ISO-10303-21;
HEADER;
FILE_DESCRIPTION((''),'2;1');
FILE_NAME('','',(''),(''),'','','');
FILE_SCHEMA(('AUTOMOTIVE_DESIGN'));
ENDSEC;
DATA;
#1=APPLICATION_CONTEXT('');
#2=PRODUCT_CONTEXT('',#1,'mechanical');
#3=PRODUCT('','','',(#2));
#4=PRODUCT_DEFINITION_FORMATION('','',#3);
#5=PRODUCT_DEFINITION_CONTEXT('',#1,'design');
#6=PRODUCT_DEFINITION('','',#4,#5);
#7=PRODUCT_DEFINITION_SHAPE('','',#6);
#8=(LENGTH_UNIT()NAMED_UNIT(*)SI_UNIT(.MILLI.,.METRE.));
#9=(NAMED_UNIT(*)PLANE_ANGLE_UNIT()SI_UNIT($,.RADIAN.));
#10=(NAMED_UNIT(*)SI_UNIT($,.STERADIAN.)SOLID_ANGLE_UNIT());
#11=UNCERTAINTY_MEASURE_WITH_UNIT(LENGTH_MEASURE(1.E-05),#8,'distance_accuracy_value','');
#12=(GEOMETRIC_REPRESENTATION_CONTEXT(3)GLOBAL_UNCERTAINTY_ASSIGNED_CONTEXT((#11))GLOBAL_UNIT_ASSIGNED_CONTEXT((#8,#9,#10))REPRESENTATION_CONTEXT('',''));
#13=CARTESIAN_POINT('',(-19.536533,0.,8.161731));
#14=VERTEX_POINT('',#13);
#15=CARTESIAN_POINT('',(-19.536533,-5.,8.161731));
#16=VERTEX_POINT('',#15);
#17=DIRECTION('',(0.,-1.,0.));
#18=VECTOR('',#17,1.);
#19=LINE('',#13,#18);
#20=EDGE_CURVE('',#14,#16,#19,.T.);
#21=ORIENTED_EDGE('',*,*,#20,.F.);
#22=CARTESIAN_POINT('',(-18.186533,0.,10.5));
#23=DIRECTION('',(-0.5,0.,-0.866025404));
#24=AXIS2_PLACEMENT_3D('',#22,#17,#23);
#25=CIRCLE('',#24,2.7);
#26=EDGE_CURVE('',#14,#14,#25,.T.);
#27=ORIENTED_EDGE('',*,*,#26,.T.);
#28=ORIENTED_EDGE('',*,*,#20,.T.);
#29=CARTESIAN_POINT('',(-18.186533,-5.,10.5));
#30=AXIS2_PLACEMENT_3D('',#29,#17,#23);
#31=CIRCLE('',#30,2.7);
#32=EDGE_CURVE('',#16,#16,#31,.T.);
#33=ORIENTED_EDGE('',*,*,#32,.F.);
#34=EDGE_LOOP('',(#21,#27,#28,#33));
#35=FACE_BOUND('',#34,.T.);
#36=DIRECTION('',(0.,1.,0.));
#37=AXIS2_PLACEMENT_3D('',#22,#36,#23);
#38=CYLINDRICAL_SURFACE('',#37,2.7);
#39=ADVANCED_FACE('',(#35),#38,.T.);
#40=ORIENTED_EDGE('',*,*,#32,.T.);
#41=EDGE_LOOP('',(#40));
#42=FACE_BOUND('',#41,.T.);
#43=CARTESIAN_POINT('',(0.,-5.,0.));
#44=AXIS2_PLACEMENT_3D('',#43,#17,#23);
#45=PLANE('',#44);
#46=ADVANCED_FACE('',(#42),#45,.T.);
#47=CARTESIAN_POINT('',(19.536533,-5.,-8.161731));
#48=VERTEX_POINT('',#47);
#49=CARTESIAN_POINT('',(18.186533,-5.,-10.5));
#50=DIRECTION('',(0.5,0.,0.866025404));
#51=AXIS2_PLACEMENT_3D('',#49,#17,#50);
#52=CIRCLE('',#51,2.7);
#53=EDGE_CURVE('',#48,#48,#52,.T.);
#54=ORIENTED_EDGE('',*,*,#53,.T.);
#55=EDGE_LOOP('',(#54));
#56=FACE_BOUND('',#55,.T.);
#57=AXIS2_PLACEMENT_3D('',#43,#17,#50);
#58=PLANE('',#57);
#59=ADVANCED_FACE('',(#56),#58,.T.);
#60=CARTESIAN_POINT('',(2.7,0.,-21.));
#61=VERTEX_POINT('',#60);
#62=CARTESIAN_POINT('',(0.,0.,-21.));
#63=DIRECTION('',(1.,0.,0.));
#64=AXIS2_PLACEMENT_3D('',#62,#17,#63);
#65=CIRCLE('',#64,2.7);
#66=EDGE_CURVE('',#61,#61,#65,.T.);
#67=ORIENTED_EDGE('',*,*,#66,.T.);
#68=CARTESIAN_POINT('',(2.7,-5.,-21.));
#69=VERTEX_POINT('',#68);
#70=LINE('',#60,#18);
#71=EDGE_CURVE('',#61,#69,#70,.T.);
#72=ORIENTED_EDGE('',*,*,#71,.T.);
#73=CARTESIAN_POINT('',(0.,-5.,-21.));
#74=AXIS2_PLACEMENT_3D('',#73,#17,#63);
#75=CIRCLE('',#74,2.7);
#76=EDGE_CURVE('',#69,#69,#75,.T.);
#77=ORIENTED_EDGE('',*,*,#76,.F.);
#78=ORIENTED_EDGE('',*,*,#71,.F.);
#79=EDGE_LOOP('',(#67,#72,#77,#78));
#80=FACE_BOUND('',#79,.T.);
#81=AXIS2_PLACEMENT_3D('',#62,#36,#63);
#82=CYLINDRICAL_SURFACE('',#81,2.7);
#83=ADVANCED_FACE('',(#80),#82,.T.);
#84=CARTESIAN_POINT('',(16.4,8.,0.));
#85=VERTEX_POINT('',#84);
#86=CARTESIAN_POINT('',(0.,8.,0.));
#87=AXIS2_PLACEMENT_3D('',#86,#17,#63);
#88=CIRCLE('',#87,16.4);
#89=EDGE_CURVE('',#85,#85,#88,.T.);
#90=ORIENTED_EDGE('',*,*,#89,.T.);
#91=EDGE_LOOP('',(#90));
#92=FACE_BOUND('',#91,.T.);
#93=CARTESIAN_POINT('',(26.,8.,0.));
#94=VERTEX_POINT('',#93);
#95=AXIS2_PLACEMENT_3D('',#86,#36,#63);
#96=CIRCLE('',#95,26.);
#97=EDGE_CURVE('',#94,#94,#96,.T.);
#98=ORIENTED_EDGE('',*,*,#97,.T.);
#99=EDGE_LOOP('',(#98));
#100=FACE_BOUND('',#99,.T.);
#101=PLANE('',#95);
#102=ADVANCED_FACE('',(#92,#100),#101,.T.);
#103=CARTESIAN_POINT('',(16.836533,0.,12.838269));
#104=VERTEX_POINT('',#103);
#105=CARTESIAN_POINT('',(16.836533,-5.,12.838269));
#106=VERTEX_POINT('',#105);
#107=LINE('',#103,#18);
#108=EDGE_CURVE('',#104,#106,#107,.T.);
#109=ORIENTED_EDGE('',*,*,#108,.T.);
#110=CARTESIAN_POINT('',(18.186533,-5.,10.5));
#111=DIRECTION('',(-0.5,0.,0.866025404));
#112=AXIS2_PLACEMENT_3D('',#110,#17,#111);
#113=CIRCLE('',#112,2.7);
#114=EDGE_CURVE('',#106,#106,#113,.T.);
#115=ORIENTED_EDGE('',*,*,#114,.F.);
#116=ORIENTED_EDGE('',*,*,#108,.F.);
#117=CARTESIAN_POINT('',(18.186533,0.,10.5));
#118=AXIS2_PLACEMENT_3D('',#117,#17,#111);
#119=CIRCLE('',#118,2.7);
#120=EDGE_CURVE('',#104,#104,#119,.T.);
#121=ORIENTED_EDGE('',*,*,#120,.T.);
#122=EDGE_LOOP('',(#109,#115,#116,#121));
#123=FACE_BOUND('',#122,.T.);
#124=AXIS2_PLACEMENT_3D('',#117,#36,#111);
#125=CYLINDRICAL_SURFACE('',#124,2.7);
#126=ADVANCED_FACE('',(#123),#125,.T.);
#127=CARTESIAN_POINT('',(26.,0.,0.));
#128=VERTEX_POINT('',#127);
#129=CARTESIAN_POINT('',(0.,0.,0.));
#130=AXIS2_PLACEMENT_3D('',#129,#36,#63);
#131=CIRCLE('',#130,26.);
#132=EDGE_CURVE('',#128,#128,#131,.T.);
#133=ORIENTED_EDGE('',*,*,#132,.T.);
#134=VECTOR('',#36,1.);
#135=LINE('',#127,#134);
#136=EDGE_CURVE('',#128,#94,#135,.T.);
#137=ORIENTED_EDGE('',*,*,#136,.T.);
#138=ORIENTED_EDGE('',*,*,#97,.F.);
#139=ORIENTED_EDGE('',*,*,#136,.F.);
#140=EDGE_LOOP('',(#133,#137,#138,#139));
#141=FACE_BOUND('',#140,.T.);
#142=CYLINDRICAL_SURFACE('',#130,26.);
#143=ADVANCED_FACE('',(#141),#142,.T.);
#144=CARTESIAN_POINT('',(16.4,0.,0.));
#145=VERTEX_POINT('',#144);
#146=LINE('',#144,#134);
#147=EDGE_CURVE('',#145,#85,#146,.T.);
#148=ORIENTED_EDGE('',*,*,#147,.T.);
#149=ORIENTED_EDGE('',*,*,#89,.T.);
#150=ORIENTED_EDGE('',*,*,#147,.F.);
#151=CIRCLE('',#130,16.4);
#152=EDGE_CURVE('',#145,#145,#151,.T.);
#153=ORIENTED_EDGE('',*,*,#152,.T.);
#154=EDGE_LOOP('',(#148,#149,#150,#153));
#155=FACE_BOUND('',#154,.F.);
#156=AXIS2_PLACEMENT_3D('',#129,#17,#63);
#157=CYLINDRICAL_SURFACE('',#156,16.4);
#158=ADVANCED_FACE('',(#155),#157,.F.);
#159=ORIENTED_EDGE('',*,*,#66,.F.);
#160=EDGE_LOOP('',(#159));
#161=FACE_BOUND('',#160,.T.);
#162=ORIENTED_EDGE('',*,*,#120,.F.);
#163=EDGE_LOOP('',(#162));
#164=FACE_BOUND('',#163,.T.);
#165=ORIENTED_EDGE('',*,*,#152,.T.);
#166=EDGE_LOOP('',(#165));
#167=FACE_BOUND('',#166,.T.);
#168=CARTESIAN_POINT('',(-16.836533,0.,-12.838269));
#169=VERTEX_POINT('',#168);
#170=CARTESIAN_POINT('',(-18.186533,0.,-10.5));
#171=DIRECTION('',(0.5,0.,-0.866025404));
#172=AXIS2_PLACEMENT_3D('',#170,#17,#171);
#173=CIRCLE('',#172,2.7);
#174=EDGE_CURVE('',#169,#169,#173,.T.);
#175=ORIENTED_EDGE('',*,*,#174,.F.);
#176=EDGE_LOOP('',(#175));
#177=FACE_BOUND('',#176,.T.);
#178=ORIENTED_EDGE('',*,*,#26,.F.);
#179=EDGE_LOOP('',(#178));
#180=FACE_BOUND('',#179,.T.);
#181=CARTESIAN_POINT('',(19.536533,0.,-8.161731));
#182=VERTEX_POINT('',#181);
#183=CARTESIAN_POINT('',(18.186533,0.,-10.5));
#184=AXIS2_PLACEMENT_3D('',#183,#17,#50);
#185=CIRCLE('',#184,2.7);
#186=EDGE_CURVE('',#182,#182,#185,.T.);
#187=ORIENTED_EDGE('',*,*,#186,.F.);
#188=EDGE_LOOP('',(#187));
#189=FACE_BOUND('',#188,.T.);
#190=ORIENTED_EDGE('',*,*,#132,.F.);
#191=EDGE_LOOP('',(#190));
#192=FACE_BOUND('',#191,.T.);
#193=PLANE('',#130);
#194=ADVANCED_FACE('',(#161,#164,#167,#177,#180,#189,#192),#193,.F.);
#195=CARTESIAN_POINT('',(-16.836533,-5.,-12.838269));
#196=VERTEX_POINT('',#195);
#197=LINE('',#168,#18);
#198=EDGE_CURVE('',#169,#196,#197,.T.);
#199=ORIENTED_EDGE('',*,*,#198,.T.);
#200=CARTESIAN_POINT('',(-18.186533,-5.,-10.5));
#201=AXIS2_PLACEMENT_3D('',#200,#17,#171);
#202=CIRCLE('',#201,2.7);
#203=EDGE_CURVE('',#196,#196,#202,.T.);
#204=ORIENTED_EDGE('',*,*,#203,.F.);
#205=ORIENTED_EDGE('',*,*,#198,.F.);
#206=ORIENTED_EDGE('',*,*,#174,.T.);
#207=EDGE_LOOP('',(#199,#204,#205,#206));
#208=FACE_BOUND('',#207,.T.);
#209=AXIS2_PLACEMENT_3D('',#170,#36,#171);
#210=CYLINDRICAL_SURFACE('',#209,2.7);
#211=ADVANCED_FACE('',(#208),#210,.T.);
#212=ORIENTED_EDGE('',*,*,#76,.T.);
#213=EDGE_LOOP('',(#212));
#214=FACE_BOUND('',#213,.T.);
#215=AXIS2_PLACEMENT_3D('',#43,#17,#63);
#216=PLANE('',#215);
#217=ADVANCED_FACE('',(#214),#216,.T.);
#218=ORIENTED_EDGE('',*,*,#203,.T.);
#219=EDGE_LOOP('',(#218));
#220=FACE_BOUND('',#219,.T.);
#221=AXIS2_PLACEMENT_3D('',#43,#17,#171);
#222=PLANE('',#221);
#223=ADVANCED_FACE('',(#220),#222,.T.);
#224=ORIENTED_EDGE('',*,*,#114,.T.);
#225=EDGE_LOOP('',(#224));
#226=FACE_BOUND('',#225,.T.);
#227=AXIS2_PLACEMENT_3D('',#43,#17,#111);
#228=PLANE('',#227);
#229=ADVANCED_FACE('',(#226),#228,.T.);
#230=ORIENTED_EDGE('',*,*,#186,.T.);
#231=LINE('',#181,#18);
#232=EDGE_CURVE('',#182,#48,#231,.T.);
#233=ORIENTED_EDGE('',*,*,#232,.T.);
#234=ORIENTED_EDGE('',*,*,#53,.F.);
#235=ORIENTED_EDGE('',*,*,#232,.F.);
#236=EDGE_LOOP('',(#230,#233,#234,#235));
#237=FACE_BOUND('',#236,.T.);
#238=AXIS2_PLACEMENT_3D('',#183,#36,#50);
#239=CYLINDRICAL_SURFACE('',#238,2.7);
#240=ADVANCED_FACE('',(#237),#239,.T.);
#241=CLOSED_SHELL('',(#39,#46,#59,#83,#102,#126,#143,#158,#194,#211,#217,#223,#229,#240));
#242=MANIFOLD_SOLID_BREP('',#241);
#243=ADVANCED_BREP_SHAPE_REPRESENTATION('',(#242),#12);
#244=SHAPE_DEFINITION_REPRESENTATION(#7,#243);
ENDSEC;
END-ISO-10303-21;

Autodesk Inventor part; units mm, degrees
ref_plane "YZ Plane" through (0, 0, 0) normal (1, 0, 0) x (0, 1, 0)
ref_plane "XZ Plane" through (0, 0, 0) normal (0, 1, 0) x (-1, 0, 0)
ref_plane "XY Plane" through (0, 0, 0) normal (0, 0, 1) x (1, 0, 0)
sketch "Sketch1" plane through (0, 0, 0) normal (0, 1, 0) x (-1, 0, 0)
  line L0 (26, 0) -> (-26, 0)
  line L1 (-26, 0) -> (-26, -26)
  line L2 (-26, -26) -> (26, -26)
  line L3 (26, -26) -> (26, 0)
  point P0 (0, 0)
  dimension "d0" = 52
  dimension "d1" = 26
  dimension "d2" = 26
  dimension "d3" = 26
extrude "Extrusion1" add sketch "Sketch1" along normal blind 35
sketch "Sketch3" plane through (-26, 0, 0) normal (0, 0, 1) x (1, 0, 0)
  line L0 (0, 35) -> (52, 35) projected
  line L1 (38.8, 35) -> (65.2826, 35)
  line L2 (65.2826, 35) -> (65.2826, 0)
  line L3 (26, -13.8937) -> (26, 45.4279) projected
  line L4 (52, 0) -> (52, 35) projected
  arc A0 (52, 10.4979) -> (38.8, 35) centre (22.6594, 10.4979) ccw
  line L5 (52, 10.4979) -> (52, 0)
  line L6 (65.2826, 0) -> (52, 0)
  point P0 (26, 0)
  point P1 (52, 10.9288)
  dimension "d7" = 90
  dimension "d33" = 12.8
revolve "Revolution1" cut sketch "Sketch3" angle 360 about axis through (0, 35, 0) along (0, 1, 0)
sketch "Sketch2" plane through (0, 35, 0) normal (0, 1, 0) x (1, 0, 0)
  circle A0 centre (0, 0) radius 12.8
  dimension "d6" = 25.6
extrude "Extrusion2" cut sketch "Sketch2" against normal blind 1
sketch "Sketch4" plane through (0, 34, 0) normal (0, 1, 0) x (1, 0, 0)
  circle A0 centre (0, 0) radius 11.4
  dimension "d11" = 22.8
extrude "Extrusion3" cut sketch "Sketch4" against normal through all
sketch "Sketch5" plane through (0, 0, 0) normal (0, -1, 0) x (1, 0, 0)
  circle A0 centre (0, 0) radius 16.4
  dimension "d16" = 32.8
extrude "Extrusion4" cut sketch "Sketch5" against normal blind 26
sketch "Sketch8" plane through (0, 0, 0) normal (0, -1, 0) x (1, 0, 0)
  circle A0 centre (0, -21) radius 2.7
  point P0 (0, 0)
  dimension "d21" = 5.4
  dimension "d22" = 21
extrude "Extrusion5" add sketch "Sketch8" along normal blind 5
pattern_circular "Circular Pattern1" count 5 over 240 about axis through (0, 35, 0) along (0, 1, 0) of "Extrusion5" both ways yes
mirror "Mirror1" about plane through (-26, 0, 0) normal (0, 0, 1) of "Extrusion4", "Extrusion1", "Revolution1", "Extrusion2", "Extrusion3"
fillet "Fillet2" radius 1 1 edges at (-16.4, 26, 0)
ref_plane "Work Plane1" through (0, 8, 0) normal (0, 1, 0) x (1, 0, 0)
sketch "Sketch10" plane through (0, 8, 0) normal (0, 1, 0) x (1, 0, 0)
  circle A0 centre (0, 0) radius 42.5144
extrude "Extrusion7" cut sketch "Sketch10" along normal blind 40
equation "\"d1\" = 0.5 * d0"
equation "\"d2\" = 0.5 * d0"
equation "\"d3\" = d1"
equation "\"d33\" = 0.5 * d6"
properties part number "_3DPrint"
